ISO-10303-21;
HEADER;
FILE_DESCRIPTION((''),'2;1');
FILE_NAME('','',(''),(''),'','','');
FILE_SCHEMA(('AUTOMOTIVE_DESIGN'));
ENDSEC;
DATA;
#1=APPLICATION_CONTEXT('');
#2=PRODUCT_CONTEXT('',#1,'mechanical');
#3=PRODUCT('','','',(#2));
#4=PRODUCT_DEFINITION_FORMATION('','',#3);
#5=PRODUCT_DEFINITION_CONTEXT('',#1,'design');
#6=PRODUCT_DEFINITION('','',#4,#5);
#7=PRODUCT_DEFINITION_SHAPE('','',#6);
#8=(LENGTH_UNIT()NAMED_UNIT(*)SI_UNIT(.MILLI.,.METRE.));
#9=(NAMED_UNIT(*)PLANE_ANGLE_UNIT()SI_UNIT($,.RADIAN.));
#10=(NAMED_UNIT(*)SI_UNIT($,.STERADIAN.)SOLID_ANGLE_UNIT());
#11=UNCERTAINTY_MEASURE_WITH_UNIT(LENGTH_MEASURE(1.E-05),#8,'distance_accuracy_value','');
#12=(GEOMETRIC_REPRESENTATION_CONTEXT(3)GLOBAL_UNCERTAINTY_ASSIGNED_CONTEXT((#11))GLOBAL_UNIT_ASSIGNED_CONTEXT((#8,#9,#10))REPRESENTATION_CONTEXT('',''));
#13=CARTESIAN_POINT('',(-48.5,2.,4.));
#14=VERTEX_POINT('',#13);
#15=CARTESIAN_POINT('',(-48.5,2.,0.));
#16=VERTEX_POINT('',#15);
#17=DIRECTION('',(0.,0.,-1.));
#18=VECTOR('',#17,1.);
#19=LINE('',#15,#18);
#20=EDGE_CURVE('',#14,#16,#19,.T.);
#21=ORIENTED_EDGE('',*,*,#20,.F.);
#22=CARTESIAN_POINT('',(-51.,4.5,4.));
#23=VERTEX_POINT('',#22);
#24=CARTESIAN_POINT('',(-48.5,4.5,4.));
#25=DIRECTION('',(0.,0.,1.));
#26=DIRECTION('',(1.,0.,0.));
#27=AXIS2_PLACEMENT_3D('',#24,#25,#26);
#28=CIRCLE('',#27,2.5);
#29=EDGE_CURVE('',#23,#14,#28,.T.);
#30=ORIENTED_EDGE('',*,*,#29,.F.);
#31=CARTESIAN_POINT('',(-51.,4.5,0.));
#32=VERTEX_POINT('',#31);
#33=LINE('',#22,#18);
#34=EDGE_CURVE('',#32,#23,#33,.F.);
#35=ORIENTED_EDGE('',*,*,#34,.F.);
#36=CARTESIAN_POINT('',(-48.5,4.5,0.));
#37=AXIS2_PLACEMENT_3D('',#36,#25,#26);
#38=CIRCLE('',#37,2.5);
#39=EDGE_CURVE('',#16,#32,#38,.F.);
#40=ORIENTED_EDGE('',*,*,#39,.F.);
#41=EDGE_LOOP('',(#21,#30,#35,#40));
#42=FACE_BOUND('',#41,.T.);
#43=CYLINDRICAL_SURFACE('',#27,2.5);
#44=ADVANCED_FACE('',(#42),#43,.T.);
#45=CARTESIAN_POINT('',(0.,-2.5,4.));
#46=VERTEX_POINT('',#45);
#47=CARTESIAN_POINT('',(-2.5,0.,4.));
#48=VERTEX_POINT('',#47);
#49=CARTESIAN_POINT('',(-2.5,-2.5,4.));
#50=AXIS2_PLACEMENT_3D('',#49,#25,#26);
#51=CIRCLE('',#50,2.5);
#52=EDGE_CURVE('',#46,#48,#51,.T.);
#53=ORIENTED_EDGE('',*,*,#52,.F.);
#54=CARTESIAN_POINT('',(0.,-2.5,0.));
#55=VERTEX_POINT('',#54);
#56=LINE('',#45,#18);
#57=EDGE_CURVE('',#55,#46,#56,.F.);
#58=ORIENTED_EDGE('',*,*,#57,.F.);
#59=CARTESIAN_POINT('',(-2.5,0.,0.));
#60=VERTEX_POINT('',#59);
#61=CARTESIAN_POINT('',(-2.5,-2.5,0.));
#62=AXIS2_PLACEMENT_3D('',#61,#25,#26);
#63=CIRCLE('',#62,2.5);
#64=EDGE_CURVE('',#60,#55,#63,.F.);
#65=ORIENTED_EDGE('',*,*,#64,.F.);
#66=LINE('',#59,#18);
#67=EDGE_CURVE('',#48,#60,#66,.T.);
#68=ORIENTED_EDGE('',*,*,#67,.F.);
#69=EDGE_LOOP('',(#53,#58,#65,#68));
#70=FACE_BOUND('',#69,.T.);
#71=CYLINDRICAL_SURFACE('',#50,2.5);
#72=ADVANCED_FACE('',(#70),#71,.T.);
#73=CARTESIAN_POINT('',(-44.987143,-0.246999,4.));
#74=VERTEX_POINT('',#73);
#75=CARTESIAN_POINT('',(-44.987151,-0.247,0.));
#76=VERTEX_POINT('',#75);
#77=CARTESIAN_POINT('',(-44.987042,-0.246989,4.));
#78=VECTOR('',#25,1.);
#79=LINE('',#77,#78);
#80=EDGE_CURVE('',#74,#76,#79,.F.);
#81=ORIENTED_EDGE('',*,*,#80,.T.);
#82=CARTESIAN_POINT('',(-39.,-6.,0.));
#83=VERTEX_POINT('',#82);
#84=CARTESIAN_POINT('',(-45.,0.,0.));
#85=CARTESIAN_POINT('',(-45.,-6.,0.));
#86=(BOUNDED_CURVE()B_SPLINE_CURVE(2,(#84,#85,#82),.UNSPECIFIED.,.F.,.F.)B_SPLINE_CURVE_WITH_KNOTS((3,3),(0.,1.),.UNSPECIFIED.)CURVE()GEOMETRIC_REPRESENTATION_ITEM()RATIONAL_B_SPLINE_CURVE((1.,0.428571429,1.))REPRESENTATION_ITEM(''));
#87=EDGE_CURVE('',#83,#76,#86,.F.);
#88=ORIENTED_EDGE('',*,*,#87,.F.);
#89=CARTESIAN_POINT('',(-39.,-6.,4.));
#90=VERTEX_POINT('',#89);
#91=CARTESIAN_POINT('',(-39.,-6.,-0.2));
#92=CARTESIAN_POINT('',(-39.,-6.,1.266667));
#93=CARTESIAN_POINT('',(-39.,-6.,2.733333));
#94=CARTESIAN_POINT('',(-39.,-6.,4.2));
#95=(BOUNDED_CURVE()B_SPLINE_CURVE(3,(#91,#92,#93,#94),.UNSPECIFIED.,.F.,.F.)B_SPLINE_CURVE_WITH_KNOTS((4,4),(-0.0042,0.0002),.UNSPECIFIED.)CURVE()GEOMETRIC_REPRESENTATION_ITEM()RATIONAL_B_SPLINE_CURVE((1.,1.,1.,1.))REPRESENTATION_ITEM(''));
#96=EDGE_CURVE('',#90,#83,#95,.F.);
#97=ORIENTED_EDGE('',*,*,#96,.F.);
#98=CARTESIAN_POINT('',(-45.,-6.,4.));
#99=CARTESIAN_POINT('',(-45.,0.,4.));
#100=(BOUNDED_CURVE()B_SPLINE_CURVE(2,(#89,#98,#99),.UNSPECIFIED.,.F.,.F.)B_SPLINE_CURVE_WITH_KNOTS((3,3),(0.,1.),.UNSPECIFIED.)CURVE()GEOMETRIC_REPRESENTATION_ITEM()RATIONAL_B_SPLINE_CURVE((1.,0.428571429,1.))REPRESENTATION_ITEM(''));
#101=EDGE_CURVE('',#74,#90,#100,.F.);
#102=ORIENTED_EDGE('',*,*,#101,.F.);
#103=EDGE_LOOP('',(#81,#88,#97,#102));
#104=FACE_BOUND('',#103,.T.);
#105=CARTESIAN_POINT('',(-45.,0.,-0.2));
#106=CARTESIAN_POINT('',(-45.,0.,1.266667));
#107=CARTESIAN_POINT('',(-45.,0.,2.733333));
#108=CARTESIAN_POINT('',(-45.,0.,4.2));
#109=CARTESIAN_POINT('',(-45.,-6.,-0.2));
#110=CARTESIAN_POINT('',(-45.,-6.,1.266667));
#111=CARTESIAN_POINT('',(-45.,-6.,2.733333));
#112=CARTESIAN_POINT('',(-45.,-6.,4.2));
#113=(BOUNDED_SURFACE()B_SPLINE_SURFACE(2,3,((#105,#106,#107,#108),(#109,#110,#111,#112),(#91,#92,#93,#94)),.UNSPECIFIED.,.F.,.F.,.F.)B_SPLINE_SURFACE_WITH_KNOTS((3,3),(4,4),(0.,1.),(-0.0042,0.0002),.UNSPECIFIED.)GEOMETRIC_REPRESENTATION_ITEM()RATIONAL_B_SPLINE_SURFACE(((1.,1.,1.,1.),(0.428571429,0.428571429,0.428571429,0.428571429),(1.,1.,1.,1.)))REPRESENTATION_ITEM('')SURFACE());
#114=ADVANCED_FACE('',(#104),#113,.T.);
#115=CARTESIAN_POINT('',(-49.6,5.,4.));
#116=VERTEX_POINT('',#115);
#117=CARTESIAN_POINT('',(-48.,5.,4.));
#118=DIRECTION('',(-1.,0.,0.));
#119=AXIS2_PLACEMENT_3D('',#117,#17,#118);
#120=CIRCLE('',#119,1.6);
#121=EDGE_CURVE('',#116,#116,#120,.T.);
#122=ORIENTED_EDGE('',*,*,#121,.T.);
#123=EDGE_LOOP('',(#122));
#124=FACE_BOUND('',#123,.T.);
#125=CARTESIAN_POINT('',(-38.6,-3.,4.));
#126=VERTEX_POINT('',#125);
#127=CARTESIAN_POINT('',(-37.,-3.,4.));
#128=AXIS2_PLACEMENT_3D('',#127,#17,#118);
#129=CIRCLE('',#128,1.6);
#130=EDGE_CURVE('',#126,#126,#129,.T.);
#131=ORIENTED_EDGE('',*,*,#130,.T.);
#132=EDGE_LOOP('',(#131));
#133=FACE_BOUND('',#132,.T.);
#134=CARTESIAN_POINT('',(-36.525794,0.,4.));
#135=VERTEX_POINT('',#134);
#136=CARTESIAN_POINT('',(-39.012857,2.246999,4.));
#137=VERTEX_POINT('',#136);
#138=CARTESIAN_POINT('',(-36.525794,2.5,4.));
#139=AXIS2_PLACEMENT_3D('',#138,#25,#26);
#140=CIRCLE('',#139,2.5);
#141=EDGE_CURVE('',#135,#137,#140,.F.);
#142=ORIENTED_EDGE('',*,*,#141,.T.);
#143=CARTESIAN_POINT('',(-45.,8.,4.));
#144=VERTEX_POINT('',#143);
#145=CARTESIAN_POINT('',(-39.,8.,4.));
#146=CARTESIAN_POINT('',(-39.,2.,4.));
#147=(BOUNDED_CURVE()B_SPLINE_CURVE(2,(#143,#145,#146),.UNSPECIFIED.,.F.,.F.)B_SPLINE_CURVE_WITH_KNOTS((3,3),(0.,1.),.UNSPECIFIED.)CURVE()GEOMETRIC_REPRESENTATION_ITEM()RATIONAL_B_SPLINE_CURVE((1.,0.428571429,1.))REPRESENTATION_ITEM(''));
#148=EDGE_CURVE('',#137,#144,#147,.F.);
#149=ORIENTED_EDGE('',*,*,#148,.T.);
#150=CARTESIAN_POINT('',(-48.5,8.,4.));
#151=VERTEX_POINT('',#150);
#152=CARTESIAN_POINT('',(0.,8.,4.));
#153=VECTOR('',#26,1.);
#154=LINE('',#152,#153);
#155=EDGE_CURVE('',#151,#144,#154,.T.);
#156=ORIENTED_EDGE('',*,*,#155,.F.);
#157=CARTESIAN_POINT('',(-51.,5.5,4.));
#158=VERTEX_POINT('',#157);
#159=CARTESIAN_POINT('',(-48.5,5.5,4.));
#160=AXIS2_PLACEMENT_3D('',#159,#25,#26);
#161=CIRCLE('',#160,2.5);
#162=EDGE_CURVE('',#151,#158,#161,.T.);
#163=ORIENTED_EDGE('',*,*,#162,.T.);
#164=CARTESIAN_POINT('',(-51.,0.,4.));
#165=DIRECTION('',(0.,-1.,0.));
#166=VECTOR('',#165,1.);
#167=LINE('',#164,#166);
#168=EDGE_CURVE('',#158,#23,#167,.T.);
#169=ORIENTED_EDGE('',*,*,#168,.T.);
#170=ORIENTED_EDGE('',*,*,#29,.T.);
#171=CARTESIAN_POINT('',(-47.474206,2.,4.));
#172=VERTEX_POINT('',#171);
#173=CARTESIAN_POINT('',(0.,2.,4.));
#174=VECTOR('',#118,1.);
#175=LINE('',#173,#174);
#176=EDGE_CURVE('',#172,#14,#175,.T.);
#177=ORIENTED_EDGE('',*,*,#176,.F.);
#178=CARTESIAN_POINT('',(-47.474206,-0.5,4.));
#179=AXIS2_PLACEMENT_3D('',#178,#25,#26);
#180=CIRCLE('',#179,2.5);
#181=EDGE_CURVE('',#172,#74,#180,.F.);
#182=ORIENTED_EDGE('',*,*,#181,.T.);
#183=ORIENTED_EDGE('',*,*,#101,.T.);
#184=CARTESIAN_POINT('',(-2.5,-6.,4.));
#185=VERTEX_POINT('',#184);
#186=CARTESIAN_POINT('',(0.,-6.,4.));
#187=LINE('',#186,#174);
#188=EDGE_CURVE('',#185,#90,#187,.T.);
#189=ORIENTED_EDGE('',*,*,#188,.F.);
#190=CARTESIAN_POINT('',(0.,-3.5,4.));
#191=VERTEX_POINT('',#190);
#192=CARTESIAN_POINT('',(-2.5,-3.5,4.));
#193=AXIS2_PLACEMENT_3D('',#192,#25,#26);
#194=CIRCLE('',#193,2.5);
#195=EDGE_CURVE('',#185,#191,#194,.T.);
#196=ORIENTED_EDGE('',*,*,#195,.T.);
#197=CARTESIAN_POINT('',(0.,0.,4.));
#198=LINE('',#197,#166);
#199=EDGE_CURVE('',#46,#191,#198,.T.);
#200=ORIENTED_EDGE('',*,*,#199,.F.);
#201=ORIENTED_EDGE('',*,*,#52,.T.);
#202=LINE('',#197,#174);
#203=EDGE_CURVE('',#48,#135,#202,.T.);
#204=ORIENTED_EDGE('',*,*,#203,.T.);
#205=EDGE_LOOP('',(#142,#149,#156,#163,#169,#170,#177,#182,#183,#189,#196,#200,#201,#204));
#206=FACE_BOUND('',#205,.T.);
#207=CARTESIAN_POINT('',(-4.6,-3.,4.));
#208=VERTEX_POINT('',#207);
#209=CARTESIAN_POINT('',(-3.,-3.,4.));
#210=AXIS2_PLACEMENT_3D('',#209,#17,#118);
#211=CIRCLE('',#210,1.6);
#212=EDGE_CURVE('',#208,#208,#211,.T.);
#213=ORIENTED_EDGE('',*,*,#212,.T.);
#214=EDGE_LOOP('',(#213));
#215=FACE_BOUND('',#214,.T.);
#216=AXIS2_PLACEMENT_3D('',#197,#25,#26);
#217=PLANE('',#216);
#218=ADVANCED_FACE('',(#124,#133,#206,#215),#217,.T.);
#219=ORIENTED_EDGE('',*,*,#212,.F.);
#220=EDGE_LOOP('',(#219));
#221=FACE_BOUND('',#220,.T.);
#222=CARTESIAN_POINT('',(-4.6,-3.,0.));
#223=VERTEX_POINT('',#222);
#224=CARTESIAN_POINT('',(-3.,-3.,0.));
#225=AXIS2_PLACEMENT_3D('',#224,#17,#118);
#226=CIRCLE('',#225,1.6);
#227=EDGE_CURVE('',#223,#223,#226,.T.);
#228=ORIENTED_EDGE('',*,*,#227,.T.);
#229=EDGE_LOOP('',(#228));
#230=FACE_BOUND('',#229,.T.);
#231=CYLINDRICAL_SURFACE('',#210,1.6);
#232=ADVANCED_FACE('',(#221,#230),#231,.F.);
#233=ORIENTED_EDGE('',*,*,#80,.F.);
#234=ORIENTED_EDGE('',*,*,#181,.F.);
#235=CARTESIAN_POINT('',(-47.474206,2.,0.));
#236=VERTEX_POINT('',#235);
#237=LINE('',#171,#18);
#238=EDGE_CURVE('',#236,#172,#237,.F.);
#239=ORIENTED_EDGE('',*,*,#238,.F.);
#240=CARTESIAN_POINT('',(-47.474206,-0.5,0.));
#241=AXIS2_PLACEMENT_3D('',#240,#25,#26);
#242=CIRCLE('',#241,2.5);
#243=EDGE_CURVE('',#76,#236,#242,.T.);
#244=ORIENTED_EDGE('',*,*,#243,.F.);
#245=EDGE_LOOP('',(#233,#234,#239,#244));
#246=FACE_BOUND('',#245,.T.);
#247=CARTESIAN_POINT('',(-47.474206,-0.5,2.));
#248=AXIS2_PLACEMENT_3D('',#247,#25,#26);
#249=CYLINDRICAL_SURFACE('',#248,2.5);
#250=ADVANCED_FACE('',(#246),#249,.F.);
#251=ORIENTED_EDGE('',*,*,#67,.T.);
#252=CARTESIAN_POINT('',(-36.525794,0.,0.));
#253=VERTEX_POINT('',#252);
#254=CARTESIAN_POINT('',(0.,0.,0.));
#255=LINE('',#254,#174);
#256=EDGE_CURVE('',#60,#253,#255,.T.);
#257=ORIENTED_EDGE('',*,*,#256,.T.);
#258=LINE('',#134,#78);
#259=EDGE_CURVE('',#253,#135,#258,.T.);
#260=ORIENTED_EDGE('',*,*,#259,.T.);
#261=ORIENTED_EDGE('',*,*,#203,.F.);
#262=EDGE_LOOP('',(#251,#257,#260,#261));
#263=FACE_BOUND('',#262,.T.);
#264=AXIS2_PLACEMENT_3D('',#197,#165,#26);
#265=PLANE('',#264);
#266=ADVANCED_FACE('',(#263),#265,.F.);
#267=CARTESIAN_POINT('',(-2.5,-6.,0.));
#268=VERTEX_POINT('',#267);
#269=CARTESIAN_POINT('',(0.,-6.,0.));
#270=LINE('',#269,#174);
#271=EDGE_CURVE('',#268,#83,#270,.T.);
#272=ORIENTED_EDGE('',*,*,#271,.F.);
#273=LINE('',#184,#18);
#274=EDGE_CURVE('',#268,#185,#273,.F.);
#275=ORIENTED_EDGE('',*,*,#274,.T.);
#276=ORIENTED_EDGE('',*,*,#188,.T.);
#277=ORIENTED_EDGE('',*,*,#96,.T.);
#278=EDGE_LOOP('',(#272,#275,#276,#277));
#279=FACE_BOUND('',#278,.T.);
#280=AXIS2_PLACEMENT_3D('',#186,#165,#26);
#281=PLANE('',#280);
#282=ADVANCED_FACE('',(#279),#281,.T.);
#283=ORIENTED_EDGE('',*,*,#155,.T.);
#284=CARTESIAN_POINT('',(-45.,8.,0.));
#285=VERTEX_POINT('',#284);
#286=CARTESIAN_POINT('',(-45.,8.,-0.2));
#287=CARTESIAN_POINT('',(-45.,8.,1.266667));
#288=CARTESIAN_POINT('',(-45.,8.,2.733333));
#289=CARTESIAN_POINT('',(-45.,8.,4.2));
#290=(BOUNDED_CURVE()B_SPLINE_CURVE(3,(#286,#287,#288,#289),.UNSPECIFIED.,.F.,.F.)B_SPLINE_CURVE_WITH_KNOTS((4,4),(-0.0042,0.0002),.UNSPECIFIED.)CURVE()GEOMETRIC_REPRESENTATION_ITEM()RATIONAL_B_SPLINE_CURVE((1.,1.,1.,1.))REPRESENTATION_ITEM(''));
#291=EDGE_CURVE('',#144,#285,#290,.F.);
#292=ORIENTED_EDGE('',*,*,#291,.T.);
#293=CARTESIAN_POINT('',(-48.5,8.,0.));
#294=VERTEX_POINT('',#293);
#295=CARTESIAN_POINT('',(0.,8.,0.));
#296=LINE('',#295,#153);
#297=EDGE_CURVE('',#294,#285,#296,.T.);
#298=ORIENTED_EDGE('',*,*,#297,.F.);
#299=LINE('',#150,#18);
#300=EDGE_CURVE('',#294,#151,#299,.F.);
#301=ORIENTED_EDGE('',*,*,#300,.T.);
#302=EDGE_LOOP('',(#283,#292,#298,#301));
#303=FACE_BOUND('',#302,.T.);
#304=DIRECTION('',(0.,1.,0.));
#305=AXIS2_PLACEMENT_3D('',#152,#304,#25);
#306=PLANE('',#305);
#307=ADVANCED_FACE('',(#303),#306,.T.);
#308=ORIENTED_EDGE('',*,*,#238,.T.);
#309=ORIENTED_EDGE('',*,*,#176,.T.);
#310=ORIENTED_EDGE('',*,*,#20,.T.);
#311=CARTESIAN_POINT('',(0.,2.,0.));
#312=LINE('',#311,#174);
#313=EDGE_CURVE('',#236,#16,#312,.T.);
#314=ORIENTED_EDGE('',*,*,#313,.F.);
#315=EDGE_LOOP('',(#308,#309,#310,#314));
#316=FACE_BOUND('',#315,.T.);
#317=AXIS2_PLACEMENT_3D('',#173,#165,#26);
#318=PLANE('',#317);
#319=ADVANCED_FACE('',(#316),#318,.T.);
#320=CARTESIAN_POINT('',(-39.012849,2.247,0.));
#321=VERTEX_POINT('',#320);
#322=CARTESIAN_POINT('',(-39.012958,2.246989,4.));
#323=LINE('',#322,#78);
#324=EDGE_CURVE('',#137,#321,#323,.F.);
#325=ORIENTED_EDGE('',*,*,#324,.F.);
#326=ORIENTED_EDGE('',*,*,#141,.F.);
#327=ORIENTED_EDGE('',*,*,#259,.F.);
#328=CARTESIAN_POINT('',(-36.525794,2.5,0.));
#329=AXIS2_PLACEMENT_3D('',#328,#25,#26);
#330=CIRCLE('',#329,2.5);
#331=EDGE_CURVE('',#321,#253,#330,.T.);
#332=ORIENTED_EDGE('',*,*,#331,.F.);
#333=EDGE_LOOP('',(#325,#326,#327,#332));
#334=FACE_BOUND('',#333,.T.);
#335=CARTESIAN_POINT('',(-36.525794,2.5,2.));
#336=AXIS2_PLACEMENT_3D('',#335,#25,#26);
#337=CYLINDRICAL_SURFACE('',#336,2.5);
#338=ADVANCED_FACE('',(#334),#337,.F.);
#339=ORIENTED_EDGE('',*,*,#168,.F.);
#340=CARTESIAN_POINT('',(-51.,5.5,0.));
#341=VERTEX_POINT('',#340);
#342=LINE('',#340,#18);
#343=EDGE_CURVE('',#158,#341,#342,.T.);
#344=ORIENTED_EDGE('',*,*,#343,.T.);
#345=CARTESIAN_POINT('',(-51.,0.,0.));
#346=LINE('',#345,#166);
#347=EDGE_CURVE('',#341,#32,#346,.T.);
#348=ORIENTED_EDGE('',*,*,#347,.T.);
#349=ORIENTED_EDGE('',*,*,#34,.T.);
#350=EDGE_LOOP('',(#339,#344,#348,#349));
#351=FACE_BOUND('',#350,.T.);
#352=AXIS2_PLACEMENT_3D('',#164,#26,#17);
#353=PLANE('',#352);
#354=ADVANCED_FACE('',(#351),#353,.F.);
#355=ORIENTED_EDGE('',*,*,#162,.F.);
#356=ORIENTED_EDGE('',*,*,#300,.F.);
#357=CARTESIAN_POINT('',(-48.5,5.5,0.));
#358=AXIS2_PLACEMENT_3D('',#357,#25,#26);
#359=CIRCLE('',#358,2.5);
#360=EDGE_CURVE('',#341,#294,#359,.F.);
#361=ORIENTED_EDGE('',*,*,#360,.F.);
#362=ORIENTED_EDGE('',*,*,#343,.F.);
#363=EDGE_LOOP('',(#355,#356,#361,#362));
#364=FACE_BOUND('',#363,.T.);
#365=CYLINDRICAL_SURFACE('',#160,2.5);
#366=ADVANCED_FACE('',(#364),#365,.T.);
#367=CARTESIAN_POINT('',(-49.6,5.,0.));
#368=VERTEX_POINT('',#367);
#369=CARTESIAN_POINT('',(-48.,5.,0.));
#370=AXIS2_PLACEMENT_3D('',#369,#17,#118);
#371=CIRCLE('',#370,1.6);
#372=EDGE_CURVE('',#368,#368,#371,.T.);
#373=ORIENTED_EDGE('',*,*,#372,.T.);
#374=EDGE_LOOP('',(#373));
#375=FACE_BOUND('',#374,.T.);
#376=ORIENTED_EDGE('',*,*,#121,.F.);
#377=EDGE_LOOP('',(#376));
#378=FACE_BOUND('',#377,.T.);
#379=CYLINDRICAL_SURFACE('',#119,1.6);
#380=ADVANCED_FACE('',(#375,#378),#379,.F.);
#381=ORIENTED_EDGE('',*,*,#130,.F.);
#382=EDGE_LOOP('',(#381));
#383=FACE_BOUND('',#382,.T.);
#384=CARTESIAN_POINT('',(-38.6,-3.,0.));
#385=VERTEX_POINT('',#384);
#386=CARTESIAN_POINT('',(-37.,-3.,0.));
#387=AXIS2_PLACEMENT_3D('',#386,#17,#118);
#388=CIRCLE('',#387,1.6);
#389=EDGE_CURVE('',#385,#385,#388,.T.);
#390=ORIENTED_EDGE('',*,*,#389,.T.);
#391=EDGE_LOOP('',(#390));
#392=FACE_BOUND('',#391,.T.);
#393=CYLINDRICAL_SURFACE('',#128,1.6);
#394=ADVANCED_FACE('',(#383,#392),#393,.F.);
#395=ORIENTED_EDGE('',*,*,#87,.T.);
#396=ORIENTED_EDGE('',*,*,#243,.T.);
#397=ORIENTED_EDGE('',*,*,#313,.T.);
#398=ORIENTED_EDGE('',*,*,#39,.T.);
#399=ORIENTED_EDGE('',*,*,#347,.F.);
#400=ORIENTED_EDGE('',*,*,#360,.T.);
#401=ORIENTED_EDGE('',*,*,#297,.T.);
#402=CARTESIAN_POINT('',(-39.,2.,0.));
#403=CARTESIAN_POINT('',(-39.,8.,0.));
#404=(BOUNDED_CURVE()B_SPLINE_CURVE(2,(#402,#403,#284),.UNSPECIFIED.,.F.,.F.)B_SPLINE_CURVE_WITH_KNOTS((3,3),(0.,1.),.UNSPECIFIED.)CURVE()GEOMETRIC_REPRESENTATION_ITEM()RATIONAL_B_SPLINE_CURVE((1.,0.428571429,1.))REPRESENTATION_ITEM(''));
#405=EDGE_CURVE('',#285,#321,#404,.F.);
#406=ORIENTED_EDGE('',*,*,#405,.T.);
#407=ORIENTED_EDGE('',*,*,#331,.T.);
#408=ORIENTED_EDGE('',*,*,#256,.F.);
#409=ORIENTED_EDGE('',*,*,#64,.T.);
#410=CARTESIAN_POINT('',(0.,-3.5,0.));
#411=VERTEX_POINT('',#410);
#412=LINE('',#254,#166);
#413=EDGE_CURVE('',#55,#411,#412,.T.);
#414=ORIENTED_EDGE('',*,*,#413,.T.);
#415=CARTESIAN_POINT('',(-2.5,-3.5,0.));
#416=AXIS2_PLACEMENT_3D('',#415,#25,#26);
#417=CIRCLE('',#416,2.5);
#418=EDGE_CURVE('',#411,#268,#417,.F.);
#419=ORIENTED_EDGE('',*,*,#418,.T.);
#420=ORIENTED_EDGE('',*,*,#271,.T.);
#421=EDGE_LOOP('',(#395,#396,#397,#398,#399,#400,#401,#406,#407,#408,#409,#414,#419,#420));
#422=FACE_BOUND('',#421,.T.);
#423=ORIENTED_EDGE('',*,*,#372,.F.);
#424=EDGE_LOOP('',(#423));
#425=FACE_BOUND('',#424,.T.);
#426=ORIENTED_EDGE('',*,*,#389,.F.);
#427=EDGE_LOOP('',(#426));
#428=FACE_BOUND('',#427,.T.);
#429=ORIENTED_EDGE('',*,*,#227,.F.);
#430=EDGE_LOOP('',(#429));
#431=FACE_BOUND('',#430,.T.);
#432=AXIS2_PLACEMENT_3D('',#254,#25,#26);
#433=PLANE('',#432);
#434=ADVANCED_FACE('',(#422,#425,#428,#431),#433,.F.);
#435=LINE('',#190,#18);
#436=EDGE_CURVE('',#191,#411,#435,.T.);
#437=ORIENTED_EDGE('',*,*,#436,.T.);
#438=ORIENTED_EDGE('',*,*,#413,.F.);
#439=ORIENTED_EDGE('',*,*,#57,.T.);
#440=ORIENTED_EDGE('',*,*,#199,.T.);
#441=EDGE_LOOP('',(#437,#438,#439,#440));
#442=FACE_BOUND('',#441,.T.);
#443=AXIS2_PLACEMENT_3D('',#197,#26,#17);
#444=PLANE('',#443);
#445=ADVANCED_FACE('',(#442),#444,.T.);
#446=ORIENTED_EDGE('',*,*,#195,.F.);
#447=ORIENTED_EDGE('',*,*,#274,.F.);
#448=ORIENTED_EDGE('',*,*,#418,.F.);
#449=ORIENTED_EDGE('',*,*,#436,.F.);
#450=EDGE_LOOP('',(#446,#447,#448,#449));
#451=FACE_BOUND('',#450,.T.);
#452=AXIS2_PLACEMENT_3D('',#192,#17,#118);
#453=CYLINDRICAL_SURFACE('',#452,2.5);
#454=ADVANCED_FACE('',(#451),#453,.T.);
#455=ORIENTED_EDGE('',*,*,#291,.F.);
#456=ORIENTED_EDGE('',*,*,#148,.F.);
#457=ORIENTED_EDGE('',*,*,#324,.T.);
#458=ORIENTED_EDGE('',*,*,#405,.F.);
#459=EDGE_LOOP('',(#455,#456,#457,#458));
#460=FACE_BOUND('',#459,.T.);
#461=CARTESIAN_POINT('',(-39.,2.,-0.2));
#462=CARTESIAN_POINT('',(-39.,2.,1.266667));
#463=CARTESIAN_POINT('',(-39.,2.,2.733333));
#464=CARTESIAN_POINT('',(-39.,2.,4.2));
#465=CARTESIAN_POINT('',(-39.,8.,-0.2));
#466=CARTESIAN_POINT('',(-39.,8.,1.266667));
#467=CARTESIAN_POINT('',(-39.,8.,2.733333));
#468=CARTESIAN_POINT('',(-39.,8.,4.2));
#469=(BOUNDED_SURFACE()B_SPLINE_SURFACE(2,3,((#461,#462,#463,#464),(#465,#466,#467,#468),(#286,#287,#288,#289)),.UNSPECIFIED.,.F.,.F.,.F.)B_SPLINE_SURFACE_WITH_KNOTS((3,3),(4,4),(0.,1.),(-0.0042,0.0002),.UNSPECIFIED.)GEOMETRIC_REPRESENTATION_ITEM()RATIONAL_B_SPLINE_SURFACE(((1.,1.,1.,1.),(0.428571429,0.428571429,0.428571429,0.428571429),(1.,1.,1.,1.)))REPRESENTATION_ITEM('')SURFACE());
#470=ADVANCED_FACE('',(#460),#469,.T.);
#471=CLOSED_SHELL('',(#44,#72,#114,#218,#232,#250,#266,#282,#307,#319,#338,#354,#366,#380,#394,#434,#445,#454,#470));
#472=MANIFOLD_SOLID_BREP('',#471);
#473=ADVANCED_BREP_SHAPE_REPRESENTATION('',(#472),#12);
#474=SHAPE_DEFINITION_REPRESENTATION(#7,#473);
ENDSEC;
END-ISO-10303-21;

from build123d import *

# Parameters (mm, degrees)
SKETCH1_W           = 45
SKETCH1_H           = 6
SKETCH1_W_2         = 6
BOSS_EXTRUDE1_DEPTH = 4
SKETCH2_R           = 1.6
CUT_EXTRUDE1_DEPTH  = 52.778373864
FILLET2_SIZE        = 6
FILLET3_R           = 2.5


with BuildPart() as part:
    # Sketch1 → Boss-Extrude1 (new body)
    with BuildSketch(Plane.XY):
        with Locations((-22.5, -3)):
            Rectangle(SKETCH1_W, SKETCH1_H)
        Polygon((-45, 0), (-39, 0), (-39, 8), (-45, 8), (-45, 2), align=None)
        with Locations((-48, 5)):
            Rectangle(SKETCH1_W_2, SKETCH1_H)
    extrude(amount=BOSS_EXTRUDE1_DEPTH)

    # Sketch2 → Cut-Extrude1 (cut, through all)
    with BuildSketch(Plane(origin=(0, 0, 0), x_dir=(-1, 0, 0), z_dir=(0, 0, -1))):
        with Locations((3, -3)):
            Circle(SKETCH2_R)
        with Locations((37, -3)):
            Circle(SKETCH2_R)
        with Locations((48, 5)):
            Circle(SKETCH2_R)
    extrude(amount=-CUT_EXTRUDE1_DEPTH, mode=Mode.SUBTRACT)

    # Fillet2
    # a fillet whose section is not a circle: 6 mm, written as the material it takes off along each edge
    with BuildSketch(Plane(origin=(-45, -6, -15), x_dir=(1, 0, 0), z_dir=(0, 0, 1))) as fillet2_piece_1:
        with BuildLine():
            Bezier((FILLET2_SIZE, 0), (0, 0), (0, FILLET2_SIZE), weights=[1, 0.428571429, 1])
            Line((0, FILLET2_SIZE), (0, 0))
            Line((0, 0), (FILLET2_SIZE, 0))
        make_face()
    extrude(amount=34, mode=Mode.SUBTRACT)
    with BuildSketch(Plane(origin=(-39, 8, -15), x_dir=(0, -1, 0), z_dir=(0, 0, 1))) as fillet2_piece_2:
        with BuildLine():
            Bezier((FILLET2_SIZE, 0), (0, 0), (0, -FILLET2_SIZE), weights=[1, 0.428571429, 1])
            Line((0, -FILLET2_SIZE), (0, 0))
            Line((0, 0), (FILLET2_SIZE, 0))
        make_face()
    extrude(amount=34, mode=Mode.SUBTRACT)

    # Fillet3
    fillet3_edges = [part.edges().sort_by_distance(p)[0] for p in [
        (-51, 8, 2),
        (-51, 2, 2),
        (-45, 2, 2),
        (-39, 0, 2),
        (0, 0, 2),
        (0, -6, 2),
    ]]
    fillet(fillet3_edges, radius=FILLET3_R)


solid = part.part
